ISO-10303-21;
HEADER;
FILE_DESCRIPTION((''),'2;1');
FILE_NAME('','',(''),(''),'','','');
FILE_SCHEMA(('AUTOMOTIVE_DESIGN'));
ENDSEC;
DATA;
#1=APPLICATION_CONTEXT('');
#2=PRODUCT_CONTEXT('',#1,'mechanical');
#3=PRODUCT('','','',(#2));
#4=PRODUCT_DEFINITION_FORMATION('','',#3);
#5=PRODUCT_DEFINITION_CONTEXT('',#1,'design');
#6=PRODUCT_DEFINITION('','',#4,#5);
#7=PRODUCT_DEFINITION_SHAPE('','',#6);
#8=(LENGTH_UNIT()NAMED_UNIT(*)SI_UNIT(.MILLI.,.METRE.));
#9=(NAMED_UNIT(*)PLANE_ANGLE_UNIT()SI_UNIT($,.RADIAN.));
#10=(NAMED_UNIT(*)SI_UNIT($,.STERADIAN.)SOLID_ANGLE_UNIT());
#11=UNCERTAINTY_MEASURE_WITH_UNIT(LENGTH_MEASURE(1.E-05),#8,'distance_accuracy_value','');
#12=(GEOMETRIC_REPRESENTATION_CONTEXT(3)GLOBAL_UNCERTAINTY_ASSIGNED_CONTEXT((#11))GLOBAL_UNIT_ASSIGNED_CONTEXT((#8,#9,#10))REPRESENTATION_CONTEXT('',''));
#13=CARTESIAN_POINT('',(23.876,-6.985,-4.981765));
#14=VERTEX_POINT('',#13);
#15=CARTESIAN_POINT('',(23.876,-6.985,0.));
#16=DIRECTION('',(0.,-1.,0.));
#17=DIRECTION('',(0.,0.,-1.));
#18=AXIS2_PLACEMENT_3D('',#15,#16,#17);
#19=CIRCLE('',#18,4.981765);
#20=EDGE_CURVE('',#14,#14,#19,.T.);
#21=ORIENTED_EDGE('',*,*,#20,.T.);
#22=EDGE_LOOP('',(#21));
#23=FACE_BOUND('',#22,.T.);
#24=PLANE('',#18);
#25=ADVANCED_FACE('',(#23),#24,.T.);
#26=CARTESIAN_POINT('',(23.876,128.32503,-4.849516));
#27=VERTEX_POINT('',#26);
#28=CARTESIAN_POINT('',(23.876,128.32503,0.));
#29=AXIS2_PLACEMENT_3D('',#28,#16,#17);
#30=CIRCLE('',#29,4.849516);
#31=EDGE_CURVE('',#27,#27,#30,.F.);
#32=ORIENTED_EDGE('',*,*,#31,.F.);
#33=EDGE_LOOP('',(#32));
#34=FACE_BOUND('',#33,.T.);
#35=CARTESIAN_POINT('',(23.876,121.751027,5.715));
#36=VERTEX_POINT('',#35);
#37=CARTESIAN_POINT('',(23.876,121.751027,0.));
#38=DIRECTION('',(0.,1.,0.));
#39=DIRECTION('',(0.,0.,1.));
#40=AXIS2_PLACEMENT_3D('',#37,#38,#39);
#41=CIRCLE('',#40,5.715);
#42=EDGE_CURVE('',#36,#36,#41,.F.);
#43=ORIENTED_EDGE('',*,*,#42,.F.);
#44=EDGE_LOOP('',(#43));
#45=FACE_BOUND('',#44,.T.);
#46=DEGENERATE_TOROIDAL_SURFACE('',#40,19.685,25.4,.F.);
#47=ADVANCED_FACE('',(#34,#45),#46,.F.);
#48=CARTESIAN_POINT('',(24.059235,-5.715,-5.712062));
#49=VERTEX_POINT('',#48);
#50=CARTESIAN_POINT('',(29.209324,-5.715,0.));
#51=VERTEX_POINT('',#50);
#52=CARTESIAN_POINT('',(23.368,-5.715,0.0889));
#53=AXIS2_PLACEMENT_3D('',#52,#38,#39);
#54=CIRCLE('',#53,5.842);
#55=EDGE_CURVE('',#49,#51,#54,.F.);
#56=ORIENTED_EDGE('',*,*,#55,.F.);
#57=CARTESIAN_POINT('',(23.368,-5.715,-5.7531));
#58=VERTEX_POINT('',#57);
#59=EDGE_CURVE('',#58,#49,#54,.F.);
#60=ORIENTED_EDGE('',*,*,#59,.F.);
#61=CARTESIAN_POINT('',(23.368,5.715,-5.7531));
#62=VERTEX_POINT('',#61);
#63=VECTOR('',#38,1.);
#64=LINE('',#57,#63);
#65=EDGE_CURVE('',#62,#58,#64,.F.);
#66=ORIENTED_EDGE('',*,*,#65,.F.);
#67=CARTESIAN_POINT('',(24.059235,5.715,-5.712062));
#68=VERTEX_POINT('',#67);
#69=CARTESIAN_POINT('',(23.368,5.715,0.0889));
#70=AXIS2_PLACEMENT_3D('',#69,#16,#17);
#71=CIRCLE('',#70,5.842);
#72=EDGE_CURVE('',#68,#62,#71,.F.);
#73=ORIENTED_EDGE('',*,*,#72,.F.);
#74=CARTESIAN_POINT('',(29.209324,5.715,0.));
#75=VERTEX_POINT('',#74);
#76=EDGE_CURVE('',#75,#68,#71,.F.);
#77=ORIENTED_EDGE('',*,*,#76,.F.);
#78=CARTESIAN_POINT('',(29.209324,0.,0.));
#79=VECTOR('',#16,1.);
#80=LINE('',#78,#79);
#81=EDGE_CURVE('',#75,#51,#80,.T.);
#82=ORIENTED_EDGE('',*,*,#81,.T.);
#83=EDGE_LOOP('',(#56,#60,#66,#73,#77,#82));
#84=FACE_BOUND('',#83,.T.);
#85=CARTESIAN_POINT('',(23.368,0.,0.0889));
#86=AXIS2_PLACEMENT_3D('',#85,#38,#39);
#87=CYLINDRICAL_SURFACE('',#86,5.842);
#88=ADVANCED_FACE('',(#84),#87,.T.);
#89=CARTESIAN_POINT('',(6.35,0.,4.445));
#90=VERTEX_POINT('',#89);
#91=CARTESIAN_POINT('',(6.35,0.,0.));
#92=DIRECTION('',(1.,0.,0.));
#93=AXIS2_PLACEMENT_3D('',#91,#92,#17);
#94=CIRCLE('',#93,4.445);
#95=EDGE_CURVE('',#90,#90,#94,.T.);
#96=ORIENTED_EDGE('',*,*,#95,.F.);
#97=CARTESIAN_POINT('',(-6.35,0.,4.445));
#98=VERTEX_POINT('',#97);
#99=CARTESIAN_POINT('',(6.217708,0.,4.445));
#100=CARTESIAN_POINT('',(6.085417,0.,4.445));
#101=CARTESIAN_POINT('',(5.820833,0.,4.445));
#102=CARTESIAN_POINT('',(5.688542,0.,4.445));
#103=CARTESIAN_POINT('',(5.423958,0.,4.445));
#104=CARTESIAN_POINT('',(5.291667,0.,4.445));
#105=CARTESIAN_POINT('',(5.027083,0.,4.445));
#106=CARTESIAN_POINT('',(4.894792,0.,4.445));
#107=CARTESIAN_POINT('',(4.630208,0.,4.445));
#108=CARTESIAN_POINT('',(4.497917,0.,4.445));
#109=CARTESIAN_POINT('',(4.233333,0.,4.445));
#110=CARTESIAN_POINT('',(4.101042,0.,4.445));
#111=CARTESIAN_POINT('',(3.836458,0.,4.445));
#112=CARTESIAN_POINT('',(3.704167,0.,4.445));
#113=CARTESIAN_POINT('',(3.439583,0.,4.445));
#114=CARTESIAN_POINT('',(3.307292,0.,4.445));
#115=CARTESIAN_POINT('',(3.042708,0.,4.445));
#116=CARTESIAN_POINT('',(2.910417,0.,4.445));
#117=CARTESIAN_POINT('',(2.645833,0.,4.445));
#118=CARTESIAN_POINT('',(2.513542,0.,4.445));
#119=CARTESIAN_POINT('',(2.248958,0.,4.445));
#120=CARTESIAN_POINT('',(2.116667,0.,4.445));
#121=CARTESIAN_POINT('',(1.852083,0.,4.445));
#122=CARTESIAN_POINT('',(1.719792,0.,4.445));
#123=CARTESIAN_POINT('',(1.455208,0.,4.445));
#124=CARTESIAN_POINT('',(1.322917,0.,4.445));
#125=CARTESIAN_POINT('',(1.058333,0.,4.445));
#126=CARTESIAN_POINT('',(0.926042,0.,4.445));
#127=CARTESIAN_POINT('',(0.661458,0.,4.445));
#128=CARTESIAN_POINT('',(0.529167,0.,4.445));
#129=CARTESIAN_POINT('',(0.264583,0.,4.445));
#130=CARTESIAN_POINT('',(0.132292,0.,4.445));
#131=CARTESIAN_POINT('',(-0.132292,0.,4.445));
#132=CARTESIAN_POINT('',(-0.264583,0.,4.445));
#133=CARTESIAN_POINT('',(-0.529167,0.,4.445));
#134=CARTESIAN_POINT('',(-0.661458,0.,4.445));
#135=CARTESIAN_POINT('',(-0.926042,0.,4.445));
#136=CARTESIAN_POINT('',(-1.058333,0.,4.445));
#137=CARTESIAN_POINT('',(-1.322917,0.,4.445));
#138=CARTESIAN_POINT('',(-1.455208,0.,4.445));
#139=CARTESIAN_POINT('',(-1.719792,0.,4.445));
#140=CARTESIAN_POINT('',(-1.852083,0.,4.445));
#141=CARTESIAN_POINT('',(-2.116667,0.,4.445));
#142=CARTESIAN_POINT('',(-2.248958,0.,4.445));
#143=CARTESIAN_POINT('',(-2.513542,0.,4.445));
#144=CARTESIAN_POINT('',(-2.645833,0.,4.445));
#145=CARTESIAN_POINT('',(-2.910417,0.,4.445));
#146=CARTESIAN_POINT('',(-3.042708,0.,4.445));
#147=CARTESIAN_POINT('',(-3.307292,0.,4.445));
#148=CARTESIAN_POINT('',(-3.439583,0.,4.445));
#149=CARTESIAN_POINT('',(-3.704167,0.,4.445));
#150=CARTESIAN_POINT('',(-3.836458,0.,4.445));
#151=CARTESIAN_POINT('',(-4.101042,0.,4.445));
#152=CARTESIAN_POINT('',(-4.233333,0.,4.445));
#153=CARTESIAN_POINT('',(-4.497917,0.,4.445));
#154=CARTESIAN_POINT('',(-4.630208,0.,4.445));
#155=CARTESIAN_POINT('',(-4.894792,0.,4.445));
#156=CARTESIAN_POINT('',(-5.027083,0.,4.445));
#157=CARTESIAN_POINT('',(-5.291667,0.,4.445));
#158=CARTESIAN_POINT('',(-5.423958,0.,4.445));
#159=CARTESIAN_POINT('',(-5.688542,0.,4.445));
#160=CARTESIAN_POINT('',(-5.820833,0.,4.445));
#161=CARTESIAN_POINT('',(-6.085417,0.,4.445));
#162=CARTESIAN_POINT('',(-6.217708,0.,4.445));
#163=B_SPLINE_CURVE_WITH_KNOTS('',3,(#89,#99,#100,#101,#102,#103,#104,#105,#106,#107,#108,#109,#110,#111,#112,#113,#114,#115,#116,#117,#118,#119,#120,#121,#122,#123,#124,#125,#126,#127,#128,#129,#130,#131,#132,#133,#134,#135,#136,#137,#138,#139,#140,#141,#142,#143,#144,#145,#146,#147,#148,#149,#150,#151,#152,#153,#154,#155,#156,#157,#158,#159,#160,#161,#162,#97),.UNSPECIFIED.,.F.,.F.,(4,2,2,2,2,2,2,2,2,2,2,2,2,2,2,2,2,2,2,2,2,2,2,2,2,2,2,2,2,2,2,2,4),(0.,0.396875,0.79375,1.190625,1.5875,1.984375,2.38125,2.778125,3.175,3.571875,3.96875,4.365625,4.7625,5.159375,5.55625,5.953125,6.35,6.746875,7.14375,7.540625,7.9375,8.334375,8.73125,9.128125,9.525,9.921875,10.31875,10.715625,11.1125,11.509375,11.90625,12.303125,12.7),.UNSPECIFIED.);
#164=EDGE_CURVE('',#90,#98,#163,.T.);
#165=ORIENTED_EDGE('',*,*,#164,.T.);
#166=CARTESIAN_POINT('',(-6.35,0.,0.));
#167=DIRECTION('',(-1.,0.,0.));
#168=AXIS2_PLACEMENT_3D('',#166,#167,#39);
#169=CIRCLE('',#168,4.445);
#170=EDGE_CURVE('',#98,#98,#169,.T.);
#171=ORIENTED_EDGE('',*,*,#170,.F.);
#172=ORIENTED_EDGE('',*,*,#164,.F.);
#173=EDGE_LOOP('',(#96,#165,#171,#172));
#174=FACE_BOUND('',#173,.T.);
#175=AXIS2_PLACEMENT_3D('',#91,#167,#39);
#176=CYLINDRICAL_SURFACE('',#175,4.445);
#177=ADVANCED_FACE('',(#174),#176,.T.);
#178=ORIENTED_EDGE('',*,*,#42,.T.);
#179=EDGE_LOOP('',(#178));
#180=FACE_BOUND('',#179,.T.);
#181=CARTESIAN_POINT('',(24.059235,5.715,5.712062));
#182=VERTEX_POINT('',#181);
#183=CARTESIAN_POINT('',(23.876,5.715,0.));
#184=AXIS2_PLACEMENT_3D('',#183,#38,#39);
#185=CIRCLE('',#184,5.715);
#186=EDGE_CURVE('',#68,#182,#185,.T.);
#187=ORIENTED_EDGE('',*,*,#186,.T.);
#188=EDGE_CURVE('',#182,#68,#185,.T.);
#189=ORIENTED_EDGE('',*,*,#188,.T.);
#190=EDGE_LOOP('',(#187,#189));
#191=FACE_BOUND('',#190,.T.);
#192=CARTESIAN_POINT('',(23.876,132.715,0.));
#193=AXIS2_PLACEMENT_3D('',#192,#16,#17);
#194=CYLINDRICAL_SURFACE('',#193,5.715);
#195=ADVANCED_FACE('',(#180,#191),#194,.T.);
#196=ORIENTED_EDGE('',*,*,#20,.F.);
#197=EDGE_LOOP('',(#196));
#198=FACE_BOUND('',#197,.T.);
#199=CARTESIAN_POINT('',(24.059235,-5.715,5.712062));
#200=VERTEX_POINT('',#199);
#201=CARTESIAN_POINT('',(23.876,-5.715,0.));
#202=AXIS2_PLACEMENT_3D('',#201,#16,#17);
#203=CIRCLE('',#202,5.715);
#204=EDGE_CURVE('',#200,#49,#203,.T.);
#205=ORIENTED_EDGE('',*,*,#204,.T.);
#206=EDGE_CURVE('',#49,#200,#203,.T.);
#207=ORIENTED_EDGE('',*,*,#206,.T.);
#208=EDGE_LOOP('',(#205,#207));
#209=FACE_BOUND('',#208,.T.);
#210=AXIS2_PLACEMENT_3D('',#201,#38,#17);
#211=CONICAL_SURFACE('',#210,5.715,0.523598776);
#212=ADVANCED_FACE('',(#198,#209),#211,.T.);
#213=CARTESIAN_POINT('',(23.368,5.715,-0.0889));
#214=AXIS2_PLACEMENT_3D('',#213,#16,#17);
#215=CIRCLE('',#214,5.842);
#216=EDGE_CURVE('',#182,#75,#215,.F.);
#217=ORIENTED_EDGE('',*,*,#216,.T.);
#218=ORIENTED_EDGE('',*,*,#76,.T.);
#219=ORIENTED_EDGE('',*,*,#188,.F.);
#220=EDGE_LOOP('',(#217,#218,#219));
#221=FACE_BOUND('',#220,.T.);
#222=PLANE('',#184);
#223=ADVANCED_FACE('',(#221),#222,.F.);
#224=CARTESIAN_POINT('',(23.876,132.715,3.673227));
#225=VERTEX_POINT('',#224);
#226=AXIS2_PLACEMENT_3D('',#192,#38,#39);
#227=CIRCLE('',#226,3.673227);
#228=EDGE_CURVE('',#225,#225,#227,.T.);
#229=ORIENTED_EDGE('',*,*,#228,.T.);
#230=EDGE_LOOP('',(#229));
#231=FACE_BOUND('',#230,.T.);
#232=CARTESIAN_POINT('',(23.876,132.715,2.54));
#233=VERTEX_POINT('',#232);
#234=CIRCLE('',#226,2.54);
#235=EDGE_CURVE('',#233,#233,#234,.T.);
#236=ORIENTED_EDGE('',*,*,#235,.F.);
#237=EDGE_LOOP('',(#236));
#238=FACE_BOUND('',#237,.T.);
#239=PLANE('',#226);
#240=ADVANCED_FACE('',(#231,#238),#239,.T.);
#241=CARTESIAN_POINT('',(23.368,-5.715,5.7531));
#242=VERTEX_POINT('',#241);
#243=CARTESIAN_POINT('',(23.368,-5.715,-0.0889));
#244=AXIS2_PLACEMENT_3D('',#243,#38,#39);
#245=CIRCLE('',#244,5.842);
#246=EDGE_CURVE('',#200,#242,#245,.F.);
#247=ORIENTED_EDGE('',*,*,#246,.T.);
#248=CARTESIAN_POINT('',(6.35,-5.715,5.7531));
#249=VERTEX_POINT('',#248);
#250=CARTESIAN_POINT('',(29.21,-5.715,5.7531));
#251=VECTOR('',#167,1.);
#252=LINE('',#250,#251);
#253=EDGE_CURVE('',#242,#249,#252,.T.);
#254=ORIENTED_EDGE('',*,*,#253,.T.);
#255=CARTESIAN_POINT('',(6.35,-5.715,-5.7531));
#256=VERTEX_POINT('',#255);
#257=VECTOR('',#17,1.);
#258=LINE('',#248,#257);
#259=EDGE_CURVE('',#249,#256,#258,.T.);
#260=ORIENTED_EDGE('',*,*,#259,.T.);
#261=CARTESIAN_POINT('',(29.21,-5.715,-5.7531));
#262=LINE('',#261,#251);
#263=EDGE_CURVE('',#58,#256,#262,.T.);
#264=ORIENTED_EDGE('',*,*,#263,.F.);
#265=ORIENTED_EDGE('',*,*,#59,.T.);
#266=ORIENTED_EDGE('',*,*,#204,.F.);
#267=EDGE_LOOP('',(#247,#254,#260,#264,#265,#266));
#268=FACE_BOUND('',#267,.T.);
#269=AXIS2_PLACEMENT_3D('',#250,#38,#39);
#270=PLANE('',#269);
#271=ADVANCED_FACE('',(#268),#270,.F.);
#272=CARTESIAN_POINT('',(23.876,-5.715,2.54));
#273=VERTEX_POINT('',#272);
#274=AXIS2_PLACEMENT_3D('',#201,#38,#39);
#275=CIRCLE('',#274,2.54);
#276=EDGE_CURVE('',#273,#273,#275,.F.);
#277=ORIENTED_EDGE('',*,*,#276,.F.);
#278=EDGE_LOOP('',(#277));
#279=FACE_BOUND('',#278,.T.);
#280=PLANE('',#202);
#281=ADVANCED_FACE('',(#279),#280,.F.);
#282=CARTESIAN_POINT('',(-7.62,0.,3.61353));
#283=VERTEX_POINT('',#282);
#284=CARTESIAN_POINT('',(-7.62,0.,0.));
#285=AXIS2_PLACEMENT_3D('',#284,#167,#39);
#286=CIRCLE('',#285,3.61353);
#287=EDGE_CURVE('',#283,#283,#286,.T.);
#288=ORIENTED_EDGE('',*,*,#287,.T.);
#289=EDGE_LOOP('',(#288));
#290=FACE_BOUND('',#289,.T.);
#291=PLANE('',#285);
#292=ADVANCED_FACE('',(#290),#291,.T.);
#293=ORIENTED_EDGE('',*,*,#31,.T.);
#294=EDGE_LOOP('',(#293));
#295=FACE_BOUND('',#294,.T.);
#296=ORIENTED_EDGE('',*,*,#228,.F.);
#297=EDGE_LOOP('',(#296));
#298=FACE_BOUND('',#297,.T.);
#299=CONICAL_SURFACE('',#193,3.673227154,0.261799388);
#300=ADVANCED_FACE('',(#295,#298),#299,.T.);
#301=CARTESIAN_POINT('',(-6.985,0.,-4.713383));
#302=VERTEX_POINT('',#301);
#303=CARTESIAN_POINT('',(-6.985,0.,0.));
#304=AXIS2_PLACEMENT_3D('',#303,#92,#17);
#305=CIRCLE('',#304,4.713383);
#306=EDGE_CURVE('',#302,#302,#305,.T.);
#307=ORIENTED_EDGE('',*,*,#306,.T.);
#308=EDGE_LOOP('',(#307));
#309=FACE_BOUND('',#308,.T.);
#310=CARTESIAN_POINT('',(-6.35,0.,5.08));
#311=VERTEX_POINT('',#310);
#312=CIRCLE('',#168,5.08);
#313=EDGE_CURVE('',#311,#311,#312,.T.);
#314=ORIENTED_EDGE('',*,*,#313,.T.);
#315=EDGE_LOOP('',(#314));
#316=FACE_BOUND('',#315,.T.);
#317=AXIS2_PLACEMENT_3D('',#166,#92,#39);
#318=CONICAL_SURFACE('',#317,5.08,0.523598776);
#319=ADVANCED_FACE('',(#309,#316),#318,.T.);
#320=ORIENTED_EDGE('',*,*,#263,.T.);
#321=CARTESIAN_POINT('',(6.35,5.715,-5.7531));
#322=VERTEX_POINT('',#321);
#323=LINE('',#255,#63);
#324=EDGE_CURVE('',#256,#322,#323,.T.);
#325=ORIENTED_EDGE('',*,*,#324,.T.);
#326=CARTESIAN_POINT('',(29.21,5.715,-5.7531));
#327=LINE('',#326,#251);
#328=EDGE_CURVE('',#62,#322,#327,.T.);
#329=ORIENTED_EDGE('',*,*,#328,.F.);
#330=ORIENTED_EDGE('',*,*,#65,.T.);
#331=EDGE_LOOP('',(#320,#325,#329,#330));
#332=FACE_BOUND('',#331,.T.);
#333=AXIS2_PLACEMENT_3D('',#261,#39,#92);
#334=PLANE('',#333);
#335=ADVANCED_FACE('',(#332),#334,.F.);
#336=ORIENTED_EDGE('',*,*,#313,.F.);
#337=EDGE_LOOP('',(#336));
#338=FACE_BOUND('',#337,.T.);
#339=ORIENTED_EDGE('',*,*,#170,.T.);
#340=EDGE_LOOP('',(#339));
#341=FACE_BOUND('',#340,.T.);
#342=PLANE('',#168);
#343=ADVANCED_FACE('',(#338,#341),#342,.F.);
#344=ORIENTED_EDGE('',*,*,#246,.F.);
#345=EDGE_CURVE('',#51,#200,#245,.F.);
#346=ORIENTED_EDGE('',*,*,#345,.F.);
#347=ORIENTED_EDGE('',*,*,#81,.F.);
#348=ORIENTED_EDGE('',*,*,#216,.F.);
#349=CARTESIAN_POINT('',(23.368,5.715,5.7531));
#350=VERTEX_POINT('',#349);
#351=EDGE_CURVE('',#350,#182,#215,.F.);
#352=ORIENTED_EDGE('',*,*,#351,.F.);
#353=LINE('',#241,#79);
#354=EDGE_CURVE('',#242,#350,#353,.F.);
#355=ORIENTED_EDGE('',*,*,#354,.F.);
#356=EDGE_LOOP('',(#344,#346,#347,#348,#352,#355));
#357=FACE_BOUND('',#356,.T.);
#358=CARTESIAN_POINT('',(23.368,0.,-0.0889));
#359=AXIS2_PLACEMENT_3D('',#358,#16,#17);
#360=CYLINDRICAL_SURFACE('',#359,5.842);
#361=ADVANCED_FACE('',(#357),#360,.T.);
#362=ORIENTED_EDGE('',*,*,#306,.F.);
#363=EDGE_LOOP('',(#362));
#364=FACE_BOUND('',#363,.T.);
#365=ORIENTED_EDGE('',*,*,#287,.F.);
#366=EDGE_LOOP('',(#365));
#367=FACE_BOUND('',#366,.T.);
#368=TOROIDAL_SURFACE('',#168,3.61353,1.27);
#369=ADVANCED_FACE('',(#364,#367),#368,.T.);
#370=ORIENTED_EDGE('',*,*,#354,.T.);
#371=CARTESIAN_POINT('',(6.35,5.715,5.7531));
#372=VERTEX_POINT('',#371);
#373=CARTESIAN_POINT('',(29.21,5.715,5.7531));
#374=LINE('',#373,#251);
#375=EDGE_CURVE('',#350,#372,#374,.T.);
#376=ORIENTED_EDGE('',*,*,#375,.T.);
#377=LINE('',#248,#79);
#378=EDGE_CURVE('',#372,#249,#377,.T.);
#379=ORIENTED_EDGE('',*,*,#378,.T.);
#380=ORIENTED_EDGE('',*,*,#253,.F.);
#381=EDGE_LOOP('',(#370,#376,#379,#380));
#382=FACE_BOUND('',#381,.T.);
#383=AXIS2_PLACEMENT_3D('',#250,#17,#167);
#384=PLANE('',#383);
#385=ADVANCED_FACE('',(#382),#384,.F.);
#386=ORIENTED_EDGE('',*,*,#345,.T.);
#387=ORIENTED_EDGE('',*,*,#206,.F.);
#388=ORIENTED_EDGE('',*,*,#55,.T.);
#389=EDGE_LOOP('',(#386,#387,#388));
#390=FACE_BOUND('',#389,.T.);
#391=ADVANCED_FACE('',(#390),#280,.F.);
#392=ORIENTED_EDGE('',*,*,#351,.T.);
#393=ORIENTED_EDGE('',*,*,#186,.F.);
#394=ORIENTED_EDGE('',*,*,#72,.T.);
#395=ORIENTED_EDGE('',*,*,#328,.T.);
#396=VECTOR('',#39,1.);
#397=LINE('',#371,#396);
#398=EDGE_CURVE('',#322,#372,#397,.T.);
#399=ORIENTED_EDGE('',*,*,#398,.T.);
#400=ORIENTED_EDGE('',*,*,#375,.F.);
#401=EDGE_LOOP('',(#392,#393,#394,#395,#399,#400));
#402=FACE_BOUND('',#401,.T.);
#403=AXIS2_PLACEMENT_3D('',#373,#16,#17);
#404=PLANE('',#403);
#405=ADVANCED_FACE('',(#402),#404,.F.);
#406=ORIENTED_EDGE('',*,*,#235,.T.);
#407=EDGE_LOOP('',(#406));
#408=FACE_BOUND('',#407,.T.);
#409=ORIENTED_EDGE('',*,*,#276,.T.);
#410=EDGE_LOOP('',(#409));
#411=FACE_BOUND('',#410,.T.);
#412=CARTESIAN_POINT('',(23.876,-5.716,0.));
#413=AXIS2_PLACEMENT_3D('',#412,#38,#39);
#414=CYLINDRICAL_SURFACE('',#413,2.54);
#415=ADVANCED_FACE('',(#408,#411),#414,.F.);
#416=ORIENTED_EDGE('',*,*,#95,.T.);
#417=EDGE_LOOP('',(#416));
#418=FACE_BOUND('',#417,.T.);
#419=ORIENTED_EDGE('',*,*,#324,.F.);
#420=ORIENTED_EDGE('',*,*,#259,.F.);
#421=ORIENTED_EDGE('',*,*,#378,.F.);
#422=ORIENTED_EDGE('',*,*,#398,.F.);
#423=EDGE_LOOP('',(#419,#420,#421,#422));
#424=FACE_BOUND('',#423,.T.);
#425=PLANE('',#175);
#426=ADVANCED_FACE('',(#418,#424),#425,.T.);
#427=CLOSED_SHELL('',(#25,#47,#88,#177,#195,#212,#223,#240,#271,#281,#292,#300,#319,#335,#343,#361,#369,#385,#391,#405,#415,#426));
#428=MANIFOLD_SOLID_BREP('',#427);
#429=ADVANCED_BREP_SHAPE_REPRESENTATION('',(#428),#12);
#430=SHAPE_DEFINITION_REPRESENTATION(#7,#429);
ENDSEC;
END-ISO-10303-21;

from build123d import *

# Parameters (mm, degrees)
SKETCH2_R           = 4.445
BOSS_EXTRUDE1_DEPTH = 6.35
SKETCH3_R           = 5.08
BOSS_EXTRUDE2_DEPTH = 1.27
BOSS_EXTRUDE2_TAPER = 30
FILLET1_R           = 1.27
SKETCH5_W           = 11.5062
SKETCH5_H           = 11.43
BOSS_EXTRUDE4_DEPTH = 22.86
CUT_EXTRUDE1_REACH  = 33.89
SKETCH6_R           = 2.54
FILLET2_R           = 5.842
SKETCH7_R           = 5.715
BOSS_EXTRUDE5_DEPTH = 1.27
BOSS_EXTRUDE5_TAPER = 30
BOSS_EXTRUDE6_START = 127
SKETCH8_R           = 5.715
SKETCH8_R_2         = 2.54
BOSS_EXTRUDE6_DEPTH = 127
CHAMFER1_SIZE       = 7.62
CHAMFER1_SIZE2      = 2.041772846
FILLET3_R           = 25.4


with BuildPart() as part:
    # Sketch2 → Boss-Extrude1 (new, symmetric)
    with BuildSketch(Plane(origin=(0, 0, 0), x_dir=(0, 0, -1), z_dir=(1, 0, 0))):
        with Locations(Location((0, 0, 0), (0, 0, 180))):
            Circle(SKETCH2_R)
    extrude(amount=BOSS_EXTRUDE1_DEPTH, both=True)

    # Sketch3 → Boss-Extrude2 (add)
    with BuildSketch(Plane.ZY.offset(6.35)):
        Circle(SKETCH3_R)
    extrude(amount=BOSS_EXTRUDE2_DEPTH, taper=BOSS_EXTRUDE2_TAPER)

    # Fillet1
    fillet1_edges = [part.edges().sort_by_distance(p)[0] for p in [
        (-7.62, 0, -4.346765158),
    ]]
    fillet(fillet1_edges, radius=FILLET1_R)

    # Sketch5 → Boss-Extrude4 (add)
    with BuildSketch(Plane(origin=(6.35, 0, 0), x_dir=(0, 0, -1), z_dir=(1, 0, 0))):
        Rectangle(SKETCH5_W, SKETCH5_H)
    extrude(amount=BOSS_EXTRUDE4_DEPTH)

    # Sketch6 → Cut-Extrude1 (cut, up to next)
    with BuildSketch(Plane(origin=(0, 5.715, 0), x_dir=(1, 0, 0), z_dir=(0, 1, 0)), mode=Mode.PRIVATE) as cut_extrude1_sk1:
        with Locations(Location((23.876, 0, 0), (0, 0, 270))):
            Circle(SKETCH6_R)
    cut_extrude1_tool1 = extrude(cut_extrude1_sk1.sketch, amount=-CUT_EXTRUDE1_REACH, mode=Mode.PRIVATE) & part.part
    add(cut_extrude1_tool1.solids().sort_by_distance((23.876, 5.715, 0))[0], mode=Mode.SUBTRACT)

    # Fillet2
    # the kernel refuses this fillet: 5.842 mm, written as the material it takes off along each edge
    with BuildSketch(Plane(origin=(29.21, -20.32, -5.7531), x_dir=(0, 0, 1), z_dir=(0, 1, 0))) as fillet2_piece_1:
        with BuildLine():
            CenterArc((FILLET2_R, -FILLET2_R), FILLET2_R, 90, 90)
            Line((0, -FILLET2_R), (0, 0))
            Line((0, 0), (FILLET2_R, 0))
        make_face()
    extrude(amount=40.64, mode=Mode.SUBTRACT)
    with BuildSketch(Plane(origin=(29.21, 20.32, 5.7531), x_dir=(-1, 0, 0), z_dir=(0, -1, 0))) as fillet2_piece_2:
        with BuildLine():
            CenterArc((FILLET2_R, FILLET2_R), FILLET2_R, 180, 90)
            Line((0, FILLET2_R), (0, 0))
            Line((0, 0), (FILLET2_R, 0))
        make_face()
    extrude(amount=40.64, mode=Mode.SUBTRACT)

    # Sketch7 → Boss-Extrude5 (add)
    with BuildSketch(Plane.XZ.offset(5.715)):
        with Locations((23.876, 0)):
            Circle(SKETCH7_R)
    extrude(amount=BOSS_EXTRUDE5_DEPTH, taper=BOSS_EXTRUDE5_TAPER)

    # Sketch8 → Boss-Extrude6 (add)
    with BuildSketch(Plane(origin=(0, 5.715, 0), x_dir=(1, 0, 0), z_dir=(0, 1, 0)).offset(BOSS_EXTRUDE6_START)):
        with Locations(Location((23.876, 0, 0), (0, 0, 88.162656718))):
            Circle(SKETCH8_R)
        with Locations(Location((23.876, 0, 0), (0, 0, 270))):
            Circle(SKETCH8_R_2, mode=Mode.SUBTRACT)
    extrude(amount=-BOSS_EXTRUDE6_DEPTH)

    # Chamfer1
    chamfer1_edges = [part.edges().sort_by_distance(p)[0] for p in [
        (23.692764561, 132.715, 5.71206178),
    ]]
    chamfer1_side = [part.faces().sort_by_distance(p)[0] for p in [
        (23.692764561, 69.215, 5.71206178),
    ]]
    chamfer(chamfer1_edges, length=CHAMFER1_SIZE, length2=CHAMFER1_SIZE2, reference=chamfer1_side[0])

    # Fillet3
    fillet3_edges = [part.edges().sort_by_distance(p)[0] for p in [
        (23.692764561, 125.095, 5.71206178),
    ]]
    fillet(fillet3_edges, radius=FILLET3_R)


solid = part.part
